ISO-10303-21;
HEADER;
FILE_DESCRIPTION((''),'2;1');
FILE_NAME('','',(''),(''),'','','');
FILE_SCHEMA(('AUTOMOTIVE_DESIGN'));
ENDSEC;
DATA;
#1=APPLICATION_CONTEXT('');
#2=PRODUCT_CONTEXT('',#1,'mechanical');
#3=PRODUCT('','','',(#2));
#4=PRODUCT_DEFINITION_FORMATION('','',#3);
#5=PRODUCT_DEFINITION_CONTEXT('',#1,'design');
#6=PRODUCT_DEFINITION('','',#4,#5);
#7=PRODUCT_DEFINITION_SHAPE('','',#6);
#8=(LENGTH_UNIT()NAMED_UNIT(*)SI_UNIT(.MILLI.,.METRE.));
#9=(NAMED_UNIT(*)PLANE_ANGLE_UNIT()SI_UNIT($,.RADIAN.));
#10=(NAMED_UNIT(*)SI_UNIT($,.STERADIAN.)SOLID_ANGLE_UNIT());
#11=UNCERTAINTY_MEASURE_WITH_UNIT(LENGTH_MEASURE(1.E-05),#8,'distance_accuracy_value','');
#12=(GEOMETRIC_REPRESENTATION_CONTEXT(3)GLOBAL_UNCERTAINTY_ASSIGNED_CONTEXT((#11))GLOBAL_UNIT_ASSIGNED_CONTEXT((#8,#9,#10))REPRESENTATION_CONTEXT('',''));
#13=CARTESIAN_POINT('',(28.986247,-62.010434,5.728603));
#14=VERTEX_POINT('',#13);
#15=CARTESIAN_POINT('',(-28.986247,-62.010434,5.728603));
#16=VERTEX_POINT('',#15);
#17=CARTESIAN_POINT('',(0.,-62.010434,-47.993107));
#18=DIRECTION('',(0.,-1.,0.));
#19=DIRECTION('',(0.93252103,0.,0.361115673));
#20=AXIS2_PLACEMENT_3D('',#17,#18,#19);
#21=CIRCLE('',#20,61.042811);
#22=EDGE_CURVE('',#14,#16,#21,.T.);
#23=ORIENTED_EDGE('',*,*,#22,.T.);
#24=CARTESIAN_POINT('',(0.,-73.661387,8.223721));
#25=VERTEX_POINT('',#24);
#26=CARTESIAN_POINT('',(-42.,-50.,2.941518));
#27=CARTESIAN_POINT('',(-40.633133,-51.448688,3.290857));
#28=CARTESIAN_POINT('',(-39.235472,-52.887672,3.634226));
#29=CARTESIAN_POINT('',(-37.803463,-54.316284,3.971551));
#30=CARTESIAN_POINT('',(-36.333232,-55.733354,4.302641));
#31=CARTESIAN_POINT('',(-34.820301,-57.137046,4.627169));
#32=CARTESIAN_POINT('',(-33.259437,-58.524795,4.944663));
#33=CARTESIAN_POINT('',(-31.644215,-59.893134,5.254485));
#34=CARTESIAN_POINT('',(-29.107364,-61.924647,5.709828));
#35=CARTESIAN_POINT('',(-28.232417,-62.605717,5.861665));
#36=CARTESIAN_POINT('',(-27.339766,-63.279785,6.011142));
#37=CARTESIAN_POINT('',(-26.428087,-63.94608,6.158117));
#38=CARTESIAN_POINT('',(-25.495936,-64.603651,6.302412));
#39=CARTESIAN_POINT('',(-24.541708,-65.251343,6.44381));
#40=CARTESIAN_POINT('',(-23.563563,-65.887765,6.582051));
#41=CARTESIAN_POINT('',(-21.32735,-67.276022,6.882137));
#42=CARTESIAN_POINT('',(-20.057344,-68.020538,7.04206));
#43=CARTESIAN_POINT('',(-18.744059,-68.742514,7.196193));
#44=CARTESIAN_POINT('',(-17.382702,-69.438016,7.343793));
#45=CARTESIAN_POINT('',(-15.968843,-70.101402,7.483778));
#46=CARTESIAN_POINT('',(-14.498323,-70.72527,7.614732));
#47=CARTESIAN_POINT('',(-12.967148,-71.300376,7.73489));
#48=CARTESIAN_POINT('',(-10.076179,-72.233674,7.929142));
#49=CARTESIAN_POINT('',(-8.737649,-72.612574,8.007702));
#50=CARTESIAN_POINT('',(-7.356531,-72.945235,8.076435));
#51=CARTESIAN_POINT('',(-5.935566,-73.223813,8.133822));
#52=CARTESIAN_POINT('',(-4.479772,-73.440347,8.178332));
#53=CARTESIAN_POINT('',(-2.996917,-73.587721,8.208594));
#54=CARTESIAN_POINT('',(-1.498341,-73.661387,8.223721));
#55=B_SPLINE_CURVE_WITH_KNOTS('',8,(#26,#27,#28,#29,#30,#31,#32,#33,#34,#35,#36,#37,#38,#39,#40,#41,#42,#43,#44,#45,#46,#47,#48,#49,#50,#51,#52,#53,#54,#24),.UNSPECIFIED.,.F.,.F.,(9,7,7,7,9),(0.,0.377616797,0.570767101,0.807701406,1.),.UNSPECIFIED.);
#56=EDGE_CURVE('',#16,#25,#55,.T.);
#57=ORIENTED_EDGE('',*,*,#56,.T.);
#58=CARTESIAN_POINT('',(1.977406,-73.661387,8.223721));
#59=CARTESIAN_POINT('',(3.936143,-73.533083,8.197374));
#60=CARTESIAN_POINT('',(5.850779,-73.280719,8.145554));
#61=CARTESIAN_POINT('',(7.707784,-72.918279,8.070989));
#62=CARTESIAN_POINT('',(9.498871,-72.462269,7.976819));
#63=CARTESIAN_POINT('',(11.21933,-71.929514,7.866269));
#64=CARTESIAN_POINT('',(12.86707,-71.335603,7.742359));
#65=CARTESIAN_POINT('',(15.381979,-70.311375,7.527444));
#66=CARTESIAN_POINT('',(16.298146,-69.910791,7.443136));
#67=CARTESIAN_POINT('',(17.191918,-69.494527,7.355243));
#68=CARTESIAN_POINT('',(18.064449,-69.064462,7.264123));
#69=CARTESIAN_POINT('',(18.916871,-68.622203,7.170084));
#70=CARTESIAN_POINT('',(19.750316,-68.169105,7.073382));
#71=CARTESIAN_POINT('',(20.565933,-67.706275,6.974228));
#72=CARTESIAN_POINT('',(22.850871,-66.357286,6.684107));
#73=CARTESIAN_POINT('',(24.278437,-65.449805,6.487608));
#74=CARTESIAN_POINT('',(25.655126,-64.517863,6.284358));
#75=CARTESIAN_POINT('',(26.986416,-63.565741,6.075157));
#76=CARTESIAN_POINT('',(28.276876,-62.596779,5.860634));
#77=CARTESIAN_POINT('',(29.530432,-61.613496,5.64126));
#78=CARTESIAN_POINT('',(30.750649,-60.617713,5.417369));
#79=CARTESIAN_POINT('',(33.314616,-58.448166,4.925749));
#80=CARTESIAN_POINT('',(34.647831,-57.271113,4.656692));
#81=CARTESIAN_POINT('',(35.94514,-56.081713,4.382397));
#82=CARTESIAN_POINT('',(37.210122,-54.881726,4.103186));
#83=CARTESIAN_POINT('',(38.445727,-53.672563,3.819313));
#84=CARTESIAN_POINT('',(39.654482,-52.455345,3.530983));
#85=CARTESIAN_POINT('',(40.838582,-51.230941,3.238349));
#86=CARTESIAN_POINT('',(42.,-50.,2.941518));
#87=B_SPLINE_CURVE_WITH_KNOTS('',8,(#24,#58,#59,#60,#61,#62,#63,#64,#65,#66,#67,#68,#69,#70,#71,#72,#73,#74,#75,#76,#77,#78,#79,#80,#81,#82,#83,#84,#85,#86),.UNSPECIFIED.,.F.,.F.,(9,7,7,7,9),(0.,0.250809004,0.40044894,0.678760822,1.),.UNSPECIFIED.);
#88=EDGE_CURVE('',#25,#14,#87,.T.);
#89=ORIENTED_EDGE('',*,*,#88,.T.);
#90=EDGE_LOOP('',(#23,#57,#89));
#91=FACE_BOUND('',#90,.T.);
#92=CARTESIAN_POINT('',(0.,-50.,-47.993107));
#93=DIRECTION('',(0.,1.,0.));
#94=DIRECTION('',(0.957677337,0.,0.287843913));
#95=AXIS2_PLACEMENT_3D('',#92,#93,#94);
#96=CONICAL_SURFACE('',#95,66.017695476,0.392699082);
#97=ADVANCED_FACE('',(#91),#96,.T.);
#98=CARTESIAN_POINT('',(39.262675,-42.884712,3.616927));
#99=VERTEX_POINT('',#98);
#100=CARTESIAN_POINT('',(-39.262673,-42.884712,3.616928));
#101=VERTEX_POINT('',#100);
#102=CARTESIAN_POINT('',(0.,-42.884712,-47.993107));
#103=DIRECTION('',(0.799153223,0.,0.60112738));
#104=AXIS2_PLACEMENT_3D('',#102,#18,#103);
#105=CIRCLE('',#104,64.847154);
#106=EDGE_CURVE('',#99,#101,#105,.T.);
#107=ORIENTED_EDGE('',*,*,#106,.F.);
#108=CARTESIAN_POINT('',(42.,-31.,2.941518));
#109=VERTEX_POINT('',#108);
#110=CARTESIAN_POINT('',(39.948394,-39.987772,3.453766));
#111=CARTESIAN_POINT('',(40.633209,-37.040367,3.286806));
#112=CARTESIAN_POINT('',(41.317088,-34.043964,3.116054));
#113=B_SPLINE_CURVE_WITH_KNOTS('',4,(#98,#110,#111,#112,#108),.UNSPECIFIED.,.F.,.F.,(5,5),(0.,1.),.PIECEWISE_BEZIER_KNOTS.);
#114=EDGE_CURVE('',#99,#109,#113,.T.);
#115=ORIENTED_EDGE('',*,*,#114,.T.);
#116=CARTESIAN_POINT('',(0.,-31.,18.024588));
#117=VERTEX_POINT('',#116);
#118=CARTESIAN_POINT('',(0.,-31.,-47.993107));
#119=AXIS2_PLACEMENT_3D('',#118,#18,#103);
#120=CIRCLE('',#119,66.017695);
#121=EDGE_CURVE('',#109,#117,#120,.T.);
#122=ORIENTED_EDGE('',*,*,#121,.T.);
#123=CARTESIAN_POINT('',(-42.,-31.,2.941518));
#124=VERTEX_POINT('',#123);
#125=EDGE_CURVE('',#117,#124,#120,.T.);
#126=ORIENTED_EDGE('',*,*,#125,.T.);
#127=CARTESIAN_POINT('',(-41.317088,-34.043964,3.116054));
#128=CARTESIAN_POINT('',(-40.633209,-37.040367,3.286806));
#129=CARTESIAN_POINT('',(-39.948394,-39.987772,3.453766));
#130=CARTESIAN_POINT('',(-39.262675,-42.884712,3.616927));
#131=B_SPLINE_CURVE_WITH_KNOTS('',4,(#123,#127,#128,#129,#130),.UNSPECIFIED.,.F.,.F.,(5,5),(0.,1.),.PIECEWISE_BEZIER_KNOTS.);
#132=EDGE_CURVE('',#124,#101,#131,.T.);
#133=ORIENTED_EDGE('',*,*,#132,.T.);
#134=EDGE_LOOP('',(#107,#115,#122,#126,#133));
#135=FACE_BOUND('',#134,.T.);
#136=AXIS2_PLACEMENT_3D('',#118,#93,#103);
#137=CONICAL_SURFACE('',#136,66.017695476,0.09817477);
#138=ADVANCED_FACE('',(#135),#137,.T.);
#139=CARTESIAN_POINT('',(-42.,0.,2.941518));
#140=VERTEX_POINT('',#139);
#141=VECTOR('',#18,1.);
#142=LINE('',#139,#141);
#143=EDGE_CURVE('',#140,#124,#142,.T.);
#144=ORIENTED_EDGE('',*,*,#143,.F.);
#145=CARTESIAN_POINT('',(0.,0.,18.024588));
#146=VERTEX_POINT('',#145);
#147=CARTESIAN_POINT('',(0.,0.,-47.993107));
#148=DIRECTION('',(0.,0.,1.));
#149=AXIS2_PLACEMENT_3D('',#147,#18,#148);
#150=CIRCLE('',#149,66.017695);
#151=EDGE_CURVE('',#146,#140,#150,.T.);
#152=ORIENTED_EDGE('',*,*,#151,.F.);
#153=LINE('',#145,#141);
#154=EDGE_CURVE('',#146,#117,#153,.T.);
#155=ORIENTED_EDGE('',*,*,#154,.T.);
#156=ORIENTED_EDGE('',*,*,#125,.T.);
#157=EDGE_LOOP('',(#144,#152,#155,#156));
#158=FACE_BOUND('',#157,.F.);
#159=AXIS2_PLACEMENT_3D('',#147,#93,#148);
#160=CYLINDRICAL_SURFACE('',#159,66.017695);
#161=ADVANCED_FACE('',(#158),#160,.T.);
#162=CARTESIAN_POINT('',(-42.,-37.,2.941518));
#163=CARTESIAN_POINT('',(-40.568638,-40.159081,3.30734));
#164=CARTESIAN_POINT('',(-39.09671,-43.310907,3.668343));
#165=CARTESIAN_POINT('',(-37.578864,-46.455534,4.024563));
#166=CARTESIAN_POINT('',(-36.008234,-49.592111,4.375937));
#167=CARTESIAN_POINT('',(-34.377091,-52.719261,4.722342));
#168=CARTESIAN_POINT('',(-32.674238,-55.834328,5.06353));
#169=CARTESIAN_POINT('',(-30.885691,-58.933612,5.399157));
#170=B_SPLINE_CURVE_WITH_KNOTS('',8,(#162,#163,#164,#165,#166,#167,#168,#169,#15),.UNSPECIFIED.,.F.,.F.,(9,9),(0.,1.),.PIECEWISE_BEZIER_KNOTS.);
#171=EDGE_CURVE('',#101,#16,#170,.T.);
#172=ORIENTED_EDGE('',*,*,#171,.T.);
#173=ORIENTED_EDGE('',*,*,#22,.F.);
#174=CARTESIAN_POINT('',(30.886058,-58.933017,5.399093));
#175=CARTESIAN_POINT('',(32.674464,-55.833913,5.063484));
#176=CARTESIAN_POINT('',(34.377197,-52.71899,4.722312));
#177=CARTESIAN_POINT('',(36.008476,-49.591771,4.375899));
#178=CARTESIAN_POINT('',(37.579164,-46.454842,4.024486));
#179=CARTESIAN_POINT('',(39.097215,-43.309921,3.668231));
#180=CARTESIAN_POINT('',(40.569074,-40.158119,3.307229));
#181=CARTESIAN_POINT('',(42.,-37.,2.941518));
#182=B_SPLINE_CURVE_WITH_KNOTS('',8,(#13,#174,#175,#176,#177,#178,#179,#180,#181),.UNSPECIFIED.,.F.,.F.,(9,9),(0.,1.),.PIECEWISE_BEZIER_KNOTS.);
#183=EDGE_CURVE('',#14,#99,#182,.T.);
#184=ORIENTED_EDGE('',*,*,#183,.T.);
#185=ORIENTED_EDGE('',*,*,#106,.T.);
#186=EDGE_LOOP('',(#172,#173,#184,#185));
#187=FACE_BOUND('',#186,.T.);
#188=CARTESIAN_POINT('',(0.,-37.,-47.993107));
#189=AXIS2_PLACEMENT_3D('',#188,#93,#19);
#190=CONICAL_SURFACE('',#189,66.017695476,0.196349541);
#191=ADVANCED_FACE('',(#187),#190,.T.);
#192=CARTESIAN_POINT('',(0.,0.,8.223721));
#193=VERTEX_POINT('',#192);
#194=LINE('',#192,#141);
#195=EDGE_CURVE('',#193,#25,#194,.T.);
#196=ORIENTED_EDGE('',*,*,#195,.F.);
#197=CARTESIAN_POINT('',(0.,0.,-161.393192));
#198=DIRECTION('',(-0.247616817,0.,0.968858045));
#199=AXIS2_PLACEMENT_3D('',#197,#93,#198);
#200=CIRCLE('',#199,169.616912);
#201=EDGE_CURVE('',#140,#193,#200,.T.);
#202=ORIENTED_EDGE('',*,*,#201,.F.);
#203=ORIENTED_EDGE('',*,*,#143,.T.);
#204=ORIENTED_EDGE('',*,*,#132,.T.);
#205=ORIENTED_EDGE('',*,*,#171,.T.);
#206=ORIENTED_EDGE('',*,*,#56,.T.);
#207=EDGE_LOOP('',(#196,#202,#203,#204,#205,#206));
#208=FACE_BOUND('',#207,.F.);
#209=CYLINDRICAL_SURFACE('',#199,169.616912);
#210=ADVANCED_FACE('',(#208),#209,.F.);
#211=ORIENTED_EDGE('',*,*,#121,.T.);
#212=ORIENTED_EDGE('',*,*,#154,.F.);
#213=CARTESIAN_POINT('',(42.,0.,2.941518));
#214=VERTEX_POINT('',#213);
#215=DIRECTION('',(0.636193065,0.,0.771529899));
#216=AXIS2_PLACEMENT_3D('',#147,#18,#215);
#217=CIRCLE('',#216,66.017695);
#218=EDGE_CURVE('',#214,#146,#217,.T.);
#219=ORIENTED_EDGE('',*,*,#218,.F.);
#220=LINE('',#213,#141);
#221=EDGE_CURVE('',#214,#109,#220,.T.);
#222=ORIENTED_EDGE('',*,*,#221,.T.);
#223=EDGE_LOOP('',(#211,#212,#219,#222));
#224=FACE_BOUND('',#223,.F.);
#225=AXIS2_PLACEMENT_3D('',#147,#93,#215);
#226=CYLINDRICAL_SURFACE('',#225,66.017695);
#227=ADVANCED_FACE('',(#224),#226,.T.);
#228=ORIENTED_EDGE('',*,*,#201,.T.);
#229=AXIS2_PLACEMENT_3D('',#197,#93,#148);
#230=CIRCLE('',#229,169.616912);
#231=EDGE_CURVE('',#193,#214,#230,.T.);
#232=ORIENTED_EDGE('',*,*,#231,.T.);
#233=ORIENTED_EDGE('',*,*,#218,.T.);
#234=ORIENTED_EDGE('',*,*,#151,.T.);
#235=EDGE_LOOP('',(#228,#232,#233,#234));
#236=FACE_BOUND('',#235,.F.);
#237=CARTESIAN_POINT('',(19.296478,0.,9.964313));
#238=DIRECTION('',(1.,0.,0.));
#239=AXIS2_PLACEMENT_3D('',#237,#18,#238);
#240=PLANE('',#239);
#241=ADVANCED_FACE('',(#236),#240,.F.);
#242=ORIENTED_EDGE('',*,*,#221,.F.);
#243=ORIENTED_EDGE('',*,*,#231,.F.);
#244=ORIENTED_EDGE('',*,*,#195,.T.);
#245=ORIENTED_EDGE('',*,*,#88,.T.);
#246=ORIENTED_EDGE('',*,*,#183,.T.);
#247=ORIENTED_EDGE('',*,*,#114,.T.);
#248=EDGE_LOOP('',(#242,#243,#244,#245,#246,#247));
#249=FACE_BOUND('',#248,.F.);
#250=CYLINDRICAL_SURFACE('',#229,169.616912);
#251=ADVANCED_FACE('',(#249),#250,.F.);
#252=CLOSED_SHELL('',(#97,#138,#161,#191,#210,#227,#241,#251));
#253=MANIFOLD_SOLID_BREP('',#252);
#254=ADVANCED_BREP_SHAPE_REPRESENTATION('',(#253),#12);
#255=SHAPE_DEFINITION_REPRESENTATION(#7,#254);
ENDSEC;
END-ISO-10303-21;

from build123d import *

# Parameters (mm, degrees)
F1_DEPTH    = 75
F2_T2_ANGLE = 123.6693885688
F3_T2_ANGLE = 146.542163671
F4_T2_ANGLE = 137.6625417494
F5_T2_ANGLE = 106.0986339536


# Not quite as in the source:
# - a fillet or chamfer that OpenCascade refuses, or shapes differently, is made with other operations: its cross-section is extruded or revolved along the edge and cut away or added


with BuildPart() as f1:
    # F0 (on Front) → F1 (new body)
    with BuildSketch(Plane.XZ):
        with BuildLine():
            Line((0, 18.0245880038), (0, 8.2237206428))
            ThreePointArc((0, 8.2237206428), (21.1654297157, 6.8979891087), (42, 2.9415184316))
            ThreePointArc((42, 2.9415184316), (22.3131070658, 14.1395036835), (0, 18.0245880038))
        make_face()
        with BuildLine():
            ThreePointArc((-42, 2.9415184316), (-21.1654297157, 6.8979891087), (0, 8.2237206428))
            Line((0, 8.2237206428), (0, 18.0245880038))
            ThreePointArc((0, 18.0245880038), (-22.3131070658, 14.1395036835), (-42, 2.9415184316))
        make_face()
    extrude(amount=F1_DEPTH)

    # F2: chamfer of 10 on 1 edges, made by hand

    # F2_s1 → F2_t2 (revolve, cut)
    with BuildSketch(Plane(origin=(19.9711424115, 0, -37.3002397662), x_dir=(0, 1, 0), z_dir=(0.472017023, 0, -0.8815894339))):
        Polygon((-65, 43.3641317608), (-75, 33.3641317608), (-75, 43.3641317608), align=None)
    revolve(axis=Axis((0, -75, -47.9931074722), (0, -1, 0)), revolution_arc=F2_T2_ANGLE, mode=Mode.SUBTRACT)

    # F3: chamfer of 15 on 1 edges, made by hand

    # F3_s1 → F3_t2 (revolve, cut)
    with BuildSketch(Plane(origin=(13.2298564014, 0, -44.0166808787), x_dir=(0, 1, 0), z_dir=(0.2878439127, 0, -0.9576773371))):
        Polygon((-50, 52.2031716385), (-75.6066017178, 41.5965699207), (-65, 52.2031716385), align=None)
    revolve(axis=Axis((0, -65, -47.9931074722), (0, -1, 0)), revolution_arc=F3_T2_ANGLE, mode=Mode.SUBTRACT)

    # F4: chamfer of 13 on 1 edges, made by hand

    # F4_s1 → F4_t2 (revolve, cut)
    with BuildSketch(Plane(origin=(16.1615809903, 0, -41.7345888895), x_dir=(0, 1, 0), z_dir=(0.3611156728, 0, -0.9325210297))):
        Polygon((-37, 48.6866321803), (-62.0104339226, 43.7117475596), (-50, 48.6866321803), align=None)
    revolve(axis=Axis((0, -50, -47.9931074722), (0, -1, 0)), revolution_arc=F4_T2_ANGLE, mode=Mode.SUBTRACT)

    # F5: chamfer of 6 on 1 edges, made by hand

    # F5_s1 → F5_t2 (revolve, cut)
    with BuildSketch(Plane(origin=(23.0555472536, 0, -30.6506000272), x_dir=(0, 1, 0), z_dir=(0.6011273799, 0, -0.7991532226))):
        Polygon((-31, 37.1677245289), (-42.8847116824, 35.9971825968), (-37, 37.1677245289), align=None)
    revolve(axis=Axis((0, -37, -47.9931074722), (0, -1, 0)), revolution_arc=F5_T2_ANGLE, mode=Mode.SUBTRACT)


solid = f1.part
